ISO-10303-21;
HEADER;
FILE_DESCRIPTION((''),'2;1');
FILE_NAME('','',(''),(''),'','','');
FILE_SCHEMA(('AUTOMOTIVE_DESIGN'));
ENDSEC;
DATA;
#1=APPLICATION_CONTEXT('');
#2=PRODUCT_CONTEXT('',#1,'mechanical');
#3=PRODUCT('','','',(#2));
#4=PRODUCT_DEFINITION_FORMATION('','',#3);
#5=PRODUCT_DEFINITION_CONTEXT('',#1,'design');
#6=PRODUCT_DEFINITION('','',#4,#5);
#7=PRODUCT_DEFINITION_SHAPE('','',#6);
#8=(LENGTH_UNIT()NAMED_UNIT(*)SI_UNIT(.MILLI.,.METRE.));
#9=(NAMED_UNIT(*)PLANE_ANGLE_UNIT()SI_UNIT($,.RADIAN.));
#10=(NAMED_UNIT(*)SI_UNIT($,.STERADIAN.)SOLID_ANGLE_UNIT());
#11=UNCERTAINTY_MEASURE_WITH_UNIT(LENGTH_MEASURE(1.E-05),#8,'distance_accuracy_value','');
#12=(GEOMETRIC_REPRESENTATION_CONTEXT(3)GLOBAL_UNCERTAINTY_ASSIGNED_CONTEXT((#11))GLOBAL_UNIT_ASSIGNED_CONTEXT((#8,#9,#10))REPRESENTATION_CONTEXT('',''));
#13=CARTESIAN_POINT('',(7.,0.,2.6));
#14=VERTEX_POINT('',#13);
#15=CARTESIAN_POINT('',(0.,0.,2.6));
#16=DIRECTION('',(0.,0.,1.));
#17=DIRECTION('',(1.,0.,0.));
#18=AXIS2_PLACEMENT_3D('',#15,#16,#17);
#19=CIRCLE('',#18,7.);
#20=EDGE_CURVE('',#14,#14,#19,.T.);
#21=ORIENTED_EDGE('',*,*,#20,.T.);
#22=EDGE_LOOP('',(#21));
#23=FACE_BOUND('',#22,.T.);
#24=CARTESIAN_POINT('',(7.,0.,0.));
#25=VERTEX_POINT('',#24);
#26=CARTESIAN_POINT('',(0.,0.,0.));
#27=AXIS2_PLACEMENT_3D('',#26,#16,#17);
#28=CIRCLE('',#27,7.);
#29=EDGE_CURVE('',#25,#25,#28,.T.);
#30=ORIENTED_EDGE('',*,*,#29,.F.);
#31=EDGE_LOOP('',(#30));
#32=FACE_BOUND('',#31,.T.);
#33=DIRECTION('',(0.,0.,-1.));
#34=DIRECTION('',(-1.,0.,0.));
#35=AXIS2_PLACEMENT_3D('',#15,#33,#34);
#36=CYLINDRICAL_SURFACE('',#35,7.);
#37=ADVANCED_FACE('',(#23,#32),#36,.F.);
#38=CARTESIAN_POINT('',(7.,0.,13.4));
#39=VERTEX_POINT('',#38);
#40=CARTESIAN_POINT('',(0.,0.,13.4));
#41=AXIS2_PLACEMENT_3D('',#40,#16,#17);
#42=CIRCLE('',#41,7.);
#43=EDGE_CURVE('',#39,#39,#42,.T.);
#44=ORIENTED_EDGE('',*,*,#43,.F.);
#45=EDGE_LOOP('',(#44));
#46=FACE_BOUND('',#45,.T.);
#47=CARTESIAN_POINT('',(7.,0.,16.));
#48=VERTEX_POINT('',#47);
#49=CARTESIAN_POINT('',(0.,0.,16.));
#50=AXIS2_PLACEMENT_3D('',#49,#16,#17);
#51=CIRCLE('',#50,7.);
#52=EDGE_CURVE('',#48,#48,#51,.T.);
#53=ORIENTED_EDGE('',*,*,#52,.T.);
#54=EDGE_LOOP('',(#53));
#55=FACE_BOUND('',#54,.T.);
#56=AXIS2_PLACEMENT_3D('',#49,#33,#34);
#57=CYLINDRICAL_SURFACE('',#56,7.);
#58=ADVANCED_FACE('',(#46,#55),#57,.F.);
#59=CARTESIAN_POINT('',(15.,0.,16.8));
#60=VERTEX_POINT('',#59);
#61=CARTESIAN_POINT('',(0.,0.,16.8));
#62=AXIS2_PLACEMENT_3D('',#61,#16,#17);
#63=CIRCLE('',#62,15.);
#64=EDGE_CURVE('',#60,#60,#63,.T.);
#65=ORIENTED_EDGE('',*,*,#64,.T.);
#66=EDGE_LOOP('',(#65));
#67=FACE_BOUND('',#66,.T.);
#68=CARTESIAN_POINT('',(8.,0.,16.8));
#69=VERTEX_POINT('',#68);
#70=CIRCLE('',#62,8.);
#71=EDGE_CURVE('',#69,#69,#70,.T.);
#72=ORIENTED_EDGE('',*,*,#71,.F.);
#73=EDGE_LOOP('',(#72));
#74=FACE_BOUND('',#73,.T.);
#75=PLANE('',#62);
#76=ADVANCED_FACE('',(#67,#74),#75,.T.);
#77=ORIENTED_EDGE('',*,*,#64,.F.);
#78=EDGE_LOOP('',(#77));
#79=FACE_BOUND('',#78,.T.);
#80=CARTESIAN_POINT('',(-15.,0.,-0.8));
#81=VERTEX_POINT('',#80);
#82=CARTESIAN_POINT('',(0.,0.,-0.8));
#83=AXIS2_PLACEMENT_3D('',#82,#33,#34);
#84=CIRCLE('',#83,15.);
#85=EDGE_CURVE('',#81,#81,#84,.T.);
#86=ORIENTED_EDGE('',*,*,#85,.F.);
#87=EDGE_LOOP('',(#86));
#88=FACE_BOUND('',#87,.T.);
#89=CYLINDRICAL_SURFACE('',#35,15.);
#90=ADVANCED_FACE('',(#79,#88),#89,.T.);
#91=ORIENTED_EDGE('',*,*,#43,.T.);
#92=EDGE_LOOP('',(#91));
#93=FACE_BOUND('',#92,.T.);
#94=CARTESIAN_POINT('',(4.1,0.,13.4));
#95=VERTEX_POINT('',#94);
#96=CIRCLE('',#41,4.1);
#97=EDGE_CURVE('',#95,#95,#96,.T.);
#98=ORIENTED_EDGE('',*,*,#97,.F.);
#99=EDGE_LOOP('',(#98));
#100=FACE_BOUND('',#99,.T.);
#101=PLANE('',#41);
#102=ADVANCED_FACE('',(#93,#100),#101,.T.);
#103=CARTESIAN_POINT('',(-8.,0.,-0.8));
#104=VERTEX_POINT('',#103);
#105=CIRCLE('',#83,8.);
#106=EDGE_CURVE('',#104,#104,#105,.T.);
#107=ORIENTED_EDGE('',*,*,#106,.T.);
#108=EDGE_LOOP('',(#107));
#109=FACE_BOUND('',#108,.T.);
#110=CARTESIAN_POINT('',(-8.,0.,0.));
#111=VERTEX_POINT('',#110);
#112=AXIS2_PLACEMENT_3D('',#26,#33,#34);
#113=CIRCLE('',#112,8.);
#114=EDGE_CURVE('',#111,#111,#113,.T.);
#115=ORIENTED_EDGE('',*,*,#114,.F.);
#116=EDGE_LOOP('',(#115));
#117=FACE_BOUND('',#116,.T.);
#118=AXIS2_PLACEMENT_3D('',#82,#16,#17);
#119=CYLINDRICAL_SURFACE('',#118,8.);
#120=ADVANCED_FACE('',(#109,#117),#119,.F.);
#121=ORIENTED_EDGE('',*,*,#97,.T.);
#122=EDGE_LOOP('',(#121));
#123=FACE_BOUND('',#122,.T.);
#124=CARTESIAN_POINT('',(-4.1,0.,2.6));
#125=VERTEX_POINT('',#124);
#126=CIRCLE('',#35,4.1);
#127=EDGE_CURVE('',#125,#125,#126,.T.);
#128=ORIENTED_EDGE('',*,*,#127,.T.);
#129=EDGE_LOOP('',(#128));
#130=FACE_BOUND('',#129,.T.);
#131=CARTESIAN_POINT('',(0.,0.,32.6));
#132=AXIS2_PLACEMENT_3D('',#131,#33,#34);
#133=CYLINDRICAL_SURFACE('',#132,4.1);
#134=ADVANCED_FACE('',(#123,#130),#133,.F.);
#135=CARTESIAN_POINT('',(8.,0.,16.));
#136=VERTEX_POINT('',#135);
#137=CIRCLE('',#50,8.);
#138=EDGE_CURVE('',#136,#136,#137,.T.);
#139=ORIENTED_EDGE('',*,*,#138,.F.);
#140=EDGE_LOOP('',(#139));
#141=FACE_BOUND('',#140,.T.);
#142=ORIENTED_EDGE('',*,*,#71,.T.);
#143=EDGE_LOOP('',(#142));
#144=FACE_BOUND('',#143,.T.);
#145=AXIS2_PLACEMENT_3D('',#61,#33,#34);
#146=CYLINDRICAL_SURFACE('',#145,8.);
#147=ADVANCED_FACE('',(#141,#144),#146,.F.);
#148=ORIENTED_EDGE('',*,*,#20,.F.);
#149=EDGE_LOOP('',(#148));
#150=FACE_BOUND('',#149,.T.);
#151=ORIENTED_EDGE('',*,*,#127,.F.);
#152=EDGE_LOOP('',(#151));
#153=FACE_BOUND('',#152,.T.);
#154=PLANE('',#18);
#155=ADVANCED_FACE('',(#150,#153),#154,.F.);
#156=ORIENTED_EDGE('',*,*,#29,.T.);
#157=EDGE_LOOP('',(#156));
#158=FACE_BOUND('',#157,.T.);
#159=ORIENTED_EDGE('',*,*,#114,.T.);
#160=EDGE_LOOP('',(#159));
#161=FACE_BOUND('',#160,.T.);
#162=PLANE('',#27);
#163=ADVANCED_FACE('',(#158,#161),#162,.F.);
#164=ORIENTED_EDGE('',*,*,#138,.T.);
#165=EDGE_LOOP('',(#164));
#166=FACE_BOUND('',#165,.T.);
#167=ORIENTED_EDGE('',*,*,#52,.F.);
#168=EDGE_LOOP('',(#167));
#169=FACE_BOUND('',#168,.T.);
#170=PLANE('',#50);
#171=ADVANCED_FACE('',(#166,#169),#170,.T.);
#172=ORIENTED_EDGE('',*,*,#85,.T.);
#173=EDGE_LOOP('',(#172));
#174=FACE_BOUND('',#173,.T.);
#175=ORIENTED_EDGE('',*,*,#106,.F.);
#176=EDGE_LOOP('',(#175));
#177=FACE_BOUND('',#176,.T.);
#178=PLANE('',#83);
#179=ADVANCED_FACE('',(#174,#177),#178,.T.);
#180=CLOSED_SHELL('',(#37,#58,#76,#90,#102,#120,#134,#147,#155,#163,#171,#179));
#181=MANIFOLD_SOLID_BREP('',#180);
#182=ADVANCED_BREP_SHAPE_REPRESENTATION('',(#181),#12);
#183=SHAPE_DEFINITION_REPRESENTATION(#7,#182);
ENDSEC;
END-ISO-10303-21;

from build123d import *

# Parameters (mm, degrees)
SKETCH_1_R          = 15
SKETCH_1_R_2        = 7
EXTRUDE_1_DEPTH     = 2.6
SKETCH_2_R          = 15
SKETCH_2_R_2        = 4
EXTRUDE_2_DEPTH     = 10.8
SKETCH_3_R          = 15
SKETCH_3_R_2        = 7
EXTRUDE_3_DEPTH     = 2.6
EXTRUDE_START       = 0.8
SKETCH_4_R          = 15
SKETCH_4_R_2        = 8
EXTRUDE_4_DEPTH     = 0.8
SKETCH_5_R          = 15
SKETCH_5_R_2        = 8
EXTRUDE_5_DEPTH     = 0.8
SKETCH_6_R          = 4.1
CUT_EXTRUDE_1_DEPTH = 30


with BuildPart() as part:
    # 草图1 → 凸台-拉伸1 (new body)
    with BuildSketch(Plane.XY):
        Circle(SKETCH_1_R)
        Circle(SKETCH_1_R_2, mode=Mode.SUBTRACT)
    extrude(amount=EXTRUDE_1_DEPTH)

    # 草图2 → 凸台-拉伸2 (add)
    with BuildSketch(Plane.XY.offset(2.6)):
        Circle(SKETCH_2_R)
        Circle(SKETCH_2_R_2, mode=Mode.SUBTRACT)
    extrude(amount=EXTRUDE_2_DEPTH)

    # 草图3 → 凸台-拉伸3 (add)
    with BuildSketch(Plane.XY.offset(13.4)):
        Circle(SKETCH_3_R)
        Circle(SKETCH_3_R_2, mode=Mode.SUBTRACT)
    extrude(amount=EXTRUDE_3_DEPTH)

    # 草图4 → 凸台-拉伸4 (add)
    with BuildSketch(Plane(origin=(0, 0, 0), x_dir=(-1, 0, 0), z_dir=(0, 0, -1)).offset(EXTRUDE_START)):
        Circle(SKETCH_4_R)
        Circle(SKETCH_4_R_2, mode=Mode.SUBTRACT)
    extrude(amount=-EXTRUDE_4_DEPTH)

    # 草图5 → 凸台-拉伸5 (add)
    with BuildSketch(Plane.XY.offset(16)):
        Circle(SKETCH_5_R)
        Circle(SKETCH_5_R_2, mode=Mode.SUBTRACT)
    extrude(amount=EXTRUDE_5_DEPTH)

    # 草图6 → 切除-拉伸1 (cut)
    with BuildSketch(Plane(origin=(0, 0, 2.6), x_dir=(-1, 0, 0), z_dir=(0, 0, -1))):
        Circle(SKETCH_6_R)
    extrude(amount=-CUT_EXTRUDE_1_DEPTH, mode=Mode.SUBTRACT)


solid = part.part
